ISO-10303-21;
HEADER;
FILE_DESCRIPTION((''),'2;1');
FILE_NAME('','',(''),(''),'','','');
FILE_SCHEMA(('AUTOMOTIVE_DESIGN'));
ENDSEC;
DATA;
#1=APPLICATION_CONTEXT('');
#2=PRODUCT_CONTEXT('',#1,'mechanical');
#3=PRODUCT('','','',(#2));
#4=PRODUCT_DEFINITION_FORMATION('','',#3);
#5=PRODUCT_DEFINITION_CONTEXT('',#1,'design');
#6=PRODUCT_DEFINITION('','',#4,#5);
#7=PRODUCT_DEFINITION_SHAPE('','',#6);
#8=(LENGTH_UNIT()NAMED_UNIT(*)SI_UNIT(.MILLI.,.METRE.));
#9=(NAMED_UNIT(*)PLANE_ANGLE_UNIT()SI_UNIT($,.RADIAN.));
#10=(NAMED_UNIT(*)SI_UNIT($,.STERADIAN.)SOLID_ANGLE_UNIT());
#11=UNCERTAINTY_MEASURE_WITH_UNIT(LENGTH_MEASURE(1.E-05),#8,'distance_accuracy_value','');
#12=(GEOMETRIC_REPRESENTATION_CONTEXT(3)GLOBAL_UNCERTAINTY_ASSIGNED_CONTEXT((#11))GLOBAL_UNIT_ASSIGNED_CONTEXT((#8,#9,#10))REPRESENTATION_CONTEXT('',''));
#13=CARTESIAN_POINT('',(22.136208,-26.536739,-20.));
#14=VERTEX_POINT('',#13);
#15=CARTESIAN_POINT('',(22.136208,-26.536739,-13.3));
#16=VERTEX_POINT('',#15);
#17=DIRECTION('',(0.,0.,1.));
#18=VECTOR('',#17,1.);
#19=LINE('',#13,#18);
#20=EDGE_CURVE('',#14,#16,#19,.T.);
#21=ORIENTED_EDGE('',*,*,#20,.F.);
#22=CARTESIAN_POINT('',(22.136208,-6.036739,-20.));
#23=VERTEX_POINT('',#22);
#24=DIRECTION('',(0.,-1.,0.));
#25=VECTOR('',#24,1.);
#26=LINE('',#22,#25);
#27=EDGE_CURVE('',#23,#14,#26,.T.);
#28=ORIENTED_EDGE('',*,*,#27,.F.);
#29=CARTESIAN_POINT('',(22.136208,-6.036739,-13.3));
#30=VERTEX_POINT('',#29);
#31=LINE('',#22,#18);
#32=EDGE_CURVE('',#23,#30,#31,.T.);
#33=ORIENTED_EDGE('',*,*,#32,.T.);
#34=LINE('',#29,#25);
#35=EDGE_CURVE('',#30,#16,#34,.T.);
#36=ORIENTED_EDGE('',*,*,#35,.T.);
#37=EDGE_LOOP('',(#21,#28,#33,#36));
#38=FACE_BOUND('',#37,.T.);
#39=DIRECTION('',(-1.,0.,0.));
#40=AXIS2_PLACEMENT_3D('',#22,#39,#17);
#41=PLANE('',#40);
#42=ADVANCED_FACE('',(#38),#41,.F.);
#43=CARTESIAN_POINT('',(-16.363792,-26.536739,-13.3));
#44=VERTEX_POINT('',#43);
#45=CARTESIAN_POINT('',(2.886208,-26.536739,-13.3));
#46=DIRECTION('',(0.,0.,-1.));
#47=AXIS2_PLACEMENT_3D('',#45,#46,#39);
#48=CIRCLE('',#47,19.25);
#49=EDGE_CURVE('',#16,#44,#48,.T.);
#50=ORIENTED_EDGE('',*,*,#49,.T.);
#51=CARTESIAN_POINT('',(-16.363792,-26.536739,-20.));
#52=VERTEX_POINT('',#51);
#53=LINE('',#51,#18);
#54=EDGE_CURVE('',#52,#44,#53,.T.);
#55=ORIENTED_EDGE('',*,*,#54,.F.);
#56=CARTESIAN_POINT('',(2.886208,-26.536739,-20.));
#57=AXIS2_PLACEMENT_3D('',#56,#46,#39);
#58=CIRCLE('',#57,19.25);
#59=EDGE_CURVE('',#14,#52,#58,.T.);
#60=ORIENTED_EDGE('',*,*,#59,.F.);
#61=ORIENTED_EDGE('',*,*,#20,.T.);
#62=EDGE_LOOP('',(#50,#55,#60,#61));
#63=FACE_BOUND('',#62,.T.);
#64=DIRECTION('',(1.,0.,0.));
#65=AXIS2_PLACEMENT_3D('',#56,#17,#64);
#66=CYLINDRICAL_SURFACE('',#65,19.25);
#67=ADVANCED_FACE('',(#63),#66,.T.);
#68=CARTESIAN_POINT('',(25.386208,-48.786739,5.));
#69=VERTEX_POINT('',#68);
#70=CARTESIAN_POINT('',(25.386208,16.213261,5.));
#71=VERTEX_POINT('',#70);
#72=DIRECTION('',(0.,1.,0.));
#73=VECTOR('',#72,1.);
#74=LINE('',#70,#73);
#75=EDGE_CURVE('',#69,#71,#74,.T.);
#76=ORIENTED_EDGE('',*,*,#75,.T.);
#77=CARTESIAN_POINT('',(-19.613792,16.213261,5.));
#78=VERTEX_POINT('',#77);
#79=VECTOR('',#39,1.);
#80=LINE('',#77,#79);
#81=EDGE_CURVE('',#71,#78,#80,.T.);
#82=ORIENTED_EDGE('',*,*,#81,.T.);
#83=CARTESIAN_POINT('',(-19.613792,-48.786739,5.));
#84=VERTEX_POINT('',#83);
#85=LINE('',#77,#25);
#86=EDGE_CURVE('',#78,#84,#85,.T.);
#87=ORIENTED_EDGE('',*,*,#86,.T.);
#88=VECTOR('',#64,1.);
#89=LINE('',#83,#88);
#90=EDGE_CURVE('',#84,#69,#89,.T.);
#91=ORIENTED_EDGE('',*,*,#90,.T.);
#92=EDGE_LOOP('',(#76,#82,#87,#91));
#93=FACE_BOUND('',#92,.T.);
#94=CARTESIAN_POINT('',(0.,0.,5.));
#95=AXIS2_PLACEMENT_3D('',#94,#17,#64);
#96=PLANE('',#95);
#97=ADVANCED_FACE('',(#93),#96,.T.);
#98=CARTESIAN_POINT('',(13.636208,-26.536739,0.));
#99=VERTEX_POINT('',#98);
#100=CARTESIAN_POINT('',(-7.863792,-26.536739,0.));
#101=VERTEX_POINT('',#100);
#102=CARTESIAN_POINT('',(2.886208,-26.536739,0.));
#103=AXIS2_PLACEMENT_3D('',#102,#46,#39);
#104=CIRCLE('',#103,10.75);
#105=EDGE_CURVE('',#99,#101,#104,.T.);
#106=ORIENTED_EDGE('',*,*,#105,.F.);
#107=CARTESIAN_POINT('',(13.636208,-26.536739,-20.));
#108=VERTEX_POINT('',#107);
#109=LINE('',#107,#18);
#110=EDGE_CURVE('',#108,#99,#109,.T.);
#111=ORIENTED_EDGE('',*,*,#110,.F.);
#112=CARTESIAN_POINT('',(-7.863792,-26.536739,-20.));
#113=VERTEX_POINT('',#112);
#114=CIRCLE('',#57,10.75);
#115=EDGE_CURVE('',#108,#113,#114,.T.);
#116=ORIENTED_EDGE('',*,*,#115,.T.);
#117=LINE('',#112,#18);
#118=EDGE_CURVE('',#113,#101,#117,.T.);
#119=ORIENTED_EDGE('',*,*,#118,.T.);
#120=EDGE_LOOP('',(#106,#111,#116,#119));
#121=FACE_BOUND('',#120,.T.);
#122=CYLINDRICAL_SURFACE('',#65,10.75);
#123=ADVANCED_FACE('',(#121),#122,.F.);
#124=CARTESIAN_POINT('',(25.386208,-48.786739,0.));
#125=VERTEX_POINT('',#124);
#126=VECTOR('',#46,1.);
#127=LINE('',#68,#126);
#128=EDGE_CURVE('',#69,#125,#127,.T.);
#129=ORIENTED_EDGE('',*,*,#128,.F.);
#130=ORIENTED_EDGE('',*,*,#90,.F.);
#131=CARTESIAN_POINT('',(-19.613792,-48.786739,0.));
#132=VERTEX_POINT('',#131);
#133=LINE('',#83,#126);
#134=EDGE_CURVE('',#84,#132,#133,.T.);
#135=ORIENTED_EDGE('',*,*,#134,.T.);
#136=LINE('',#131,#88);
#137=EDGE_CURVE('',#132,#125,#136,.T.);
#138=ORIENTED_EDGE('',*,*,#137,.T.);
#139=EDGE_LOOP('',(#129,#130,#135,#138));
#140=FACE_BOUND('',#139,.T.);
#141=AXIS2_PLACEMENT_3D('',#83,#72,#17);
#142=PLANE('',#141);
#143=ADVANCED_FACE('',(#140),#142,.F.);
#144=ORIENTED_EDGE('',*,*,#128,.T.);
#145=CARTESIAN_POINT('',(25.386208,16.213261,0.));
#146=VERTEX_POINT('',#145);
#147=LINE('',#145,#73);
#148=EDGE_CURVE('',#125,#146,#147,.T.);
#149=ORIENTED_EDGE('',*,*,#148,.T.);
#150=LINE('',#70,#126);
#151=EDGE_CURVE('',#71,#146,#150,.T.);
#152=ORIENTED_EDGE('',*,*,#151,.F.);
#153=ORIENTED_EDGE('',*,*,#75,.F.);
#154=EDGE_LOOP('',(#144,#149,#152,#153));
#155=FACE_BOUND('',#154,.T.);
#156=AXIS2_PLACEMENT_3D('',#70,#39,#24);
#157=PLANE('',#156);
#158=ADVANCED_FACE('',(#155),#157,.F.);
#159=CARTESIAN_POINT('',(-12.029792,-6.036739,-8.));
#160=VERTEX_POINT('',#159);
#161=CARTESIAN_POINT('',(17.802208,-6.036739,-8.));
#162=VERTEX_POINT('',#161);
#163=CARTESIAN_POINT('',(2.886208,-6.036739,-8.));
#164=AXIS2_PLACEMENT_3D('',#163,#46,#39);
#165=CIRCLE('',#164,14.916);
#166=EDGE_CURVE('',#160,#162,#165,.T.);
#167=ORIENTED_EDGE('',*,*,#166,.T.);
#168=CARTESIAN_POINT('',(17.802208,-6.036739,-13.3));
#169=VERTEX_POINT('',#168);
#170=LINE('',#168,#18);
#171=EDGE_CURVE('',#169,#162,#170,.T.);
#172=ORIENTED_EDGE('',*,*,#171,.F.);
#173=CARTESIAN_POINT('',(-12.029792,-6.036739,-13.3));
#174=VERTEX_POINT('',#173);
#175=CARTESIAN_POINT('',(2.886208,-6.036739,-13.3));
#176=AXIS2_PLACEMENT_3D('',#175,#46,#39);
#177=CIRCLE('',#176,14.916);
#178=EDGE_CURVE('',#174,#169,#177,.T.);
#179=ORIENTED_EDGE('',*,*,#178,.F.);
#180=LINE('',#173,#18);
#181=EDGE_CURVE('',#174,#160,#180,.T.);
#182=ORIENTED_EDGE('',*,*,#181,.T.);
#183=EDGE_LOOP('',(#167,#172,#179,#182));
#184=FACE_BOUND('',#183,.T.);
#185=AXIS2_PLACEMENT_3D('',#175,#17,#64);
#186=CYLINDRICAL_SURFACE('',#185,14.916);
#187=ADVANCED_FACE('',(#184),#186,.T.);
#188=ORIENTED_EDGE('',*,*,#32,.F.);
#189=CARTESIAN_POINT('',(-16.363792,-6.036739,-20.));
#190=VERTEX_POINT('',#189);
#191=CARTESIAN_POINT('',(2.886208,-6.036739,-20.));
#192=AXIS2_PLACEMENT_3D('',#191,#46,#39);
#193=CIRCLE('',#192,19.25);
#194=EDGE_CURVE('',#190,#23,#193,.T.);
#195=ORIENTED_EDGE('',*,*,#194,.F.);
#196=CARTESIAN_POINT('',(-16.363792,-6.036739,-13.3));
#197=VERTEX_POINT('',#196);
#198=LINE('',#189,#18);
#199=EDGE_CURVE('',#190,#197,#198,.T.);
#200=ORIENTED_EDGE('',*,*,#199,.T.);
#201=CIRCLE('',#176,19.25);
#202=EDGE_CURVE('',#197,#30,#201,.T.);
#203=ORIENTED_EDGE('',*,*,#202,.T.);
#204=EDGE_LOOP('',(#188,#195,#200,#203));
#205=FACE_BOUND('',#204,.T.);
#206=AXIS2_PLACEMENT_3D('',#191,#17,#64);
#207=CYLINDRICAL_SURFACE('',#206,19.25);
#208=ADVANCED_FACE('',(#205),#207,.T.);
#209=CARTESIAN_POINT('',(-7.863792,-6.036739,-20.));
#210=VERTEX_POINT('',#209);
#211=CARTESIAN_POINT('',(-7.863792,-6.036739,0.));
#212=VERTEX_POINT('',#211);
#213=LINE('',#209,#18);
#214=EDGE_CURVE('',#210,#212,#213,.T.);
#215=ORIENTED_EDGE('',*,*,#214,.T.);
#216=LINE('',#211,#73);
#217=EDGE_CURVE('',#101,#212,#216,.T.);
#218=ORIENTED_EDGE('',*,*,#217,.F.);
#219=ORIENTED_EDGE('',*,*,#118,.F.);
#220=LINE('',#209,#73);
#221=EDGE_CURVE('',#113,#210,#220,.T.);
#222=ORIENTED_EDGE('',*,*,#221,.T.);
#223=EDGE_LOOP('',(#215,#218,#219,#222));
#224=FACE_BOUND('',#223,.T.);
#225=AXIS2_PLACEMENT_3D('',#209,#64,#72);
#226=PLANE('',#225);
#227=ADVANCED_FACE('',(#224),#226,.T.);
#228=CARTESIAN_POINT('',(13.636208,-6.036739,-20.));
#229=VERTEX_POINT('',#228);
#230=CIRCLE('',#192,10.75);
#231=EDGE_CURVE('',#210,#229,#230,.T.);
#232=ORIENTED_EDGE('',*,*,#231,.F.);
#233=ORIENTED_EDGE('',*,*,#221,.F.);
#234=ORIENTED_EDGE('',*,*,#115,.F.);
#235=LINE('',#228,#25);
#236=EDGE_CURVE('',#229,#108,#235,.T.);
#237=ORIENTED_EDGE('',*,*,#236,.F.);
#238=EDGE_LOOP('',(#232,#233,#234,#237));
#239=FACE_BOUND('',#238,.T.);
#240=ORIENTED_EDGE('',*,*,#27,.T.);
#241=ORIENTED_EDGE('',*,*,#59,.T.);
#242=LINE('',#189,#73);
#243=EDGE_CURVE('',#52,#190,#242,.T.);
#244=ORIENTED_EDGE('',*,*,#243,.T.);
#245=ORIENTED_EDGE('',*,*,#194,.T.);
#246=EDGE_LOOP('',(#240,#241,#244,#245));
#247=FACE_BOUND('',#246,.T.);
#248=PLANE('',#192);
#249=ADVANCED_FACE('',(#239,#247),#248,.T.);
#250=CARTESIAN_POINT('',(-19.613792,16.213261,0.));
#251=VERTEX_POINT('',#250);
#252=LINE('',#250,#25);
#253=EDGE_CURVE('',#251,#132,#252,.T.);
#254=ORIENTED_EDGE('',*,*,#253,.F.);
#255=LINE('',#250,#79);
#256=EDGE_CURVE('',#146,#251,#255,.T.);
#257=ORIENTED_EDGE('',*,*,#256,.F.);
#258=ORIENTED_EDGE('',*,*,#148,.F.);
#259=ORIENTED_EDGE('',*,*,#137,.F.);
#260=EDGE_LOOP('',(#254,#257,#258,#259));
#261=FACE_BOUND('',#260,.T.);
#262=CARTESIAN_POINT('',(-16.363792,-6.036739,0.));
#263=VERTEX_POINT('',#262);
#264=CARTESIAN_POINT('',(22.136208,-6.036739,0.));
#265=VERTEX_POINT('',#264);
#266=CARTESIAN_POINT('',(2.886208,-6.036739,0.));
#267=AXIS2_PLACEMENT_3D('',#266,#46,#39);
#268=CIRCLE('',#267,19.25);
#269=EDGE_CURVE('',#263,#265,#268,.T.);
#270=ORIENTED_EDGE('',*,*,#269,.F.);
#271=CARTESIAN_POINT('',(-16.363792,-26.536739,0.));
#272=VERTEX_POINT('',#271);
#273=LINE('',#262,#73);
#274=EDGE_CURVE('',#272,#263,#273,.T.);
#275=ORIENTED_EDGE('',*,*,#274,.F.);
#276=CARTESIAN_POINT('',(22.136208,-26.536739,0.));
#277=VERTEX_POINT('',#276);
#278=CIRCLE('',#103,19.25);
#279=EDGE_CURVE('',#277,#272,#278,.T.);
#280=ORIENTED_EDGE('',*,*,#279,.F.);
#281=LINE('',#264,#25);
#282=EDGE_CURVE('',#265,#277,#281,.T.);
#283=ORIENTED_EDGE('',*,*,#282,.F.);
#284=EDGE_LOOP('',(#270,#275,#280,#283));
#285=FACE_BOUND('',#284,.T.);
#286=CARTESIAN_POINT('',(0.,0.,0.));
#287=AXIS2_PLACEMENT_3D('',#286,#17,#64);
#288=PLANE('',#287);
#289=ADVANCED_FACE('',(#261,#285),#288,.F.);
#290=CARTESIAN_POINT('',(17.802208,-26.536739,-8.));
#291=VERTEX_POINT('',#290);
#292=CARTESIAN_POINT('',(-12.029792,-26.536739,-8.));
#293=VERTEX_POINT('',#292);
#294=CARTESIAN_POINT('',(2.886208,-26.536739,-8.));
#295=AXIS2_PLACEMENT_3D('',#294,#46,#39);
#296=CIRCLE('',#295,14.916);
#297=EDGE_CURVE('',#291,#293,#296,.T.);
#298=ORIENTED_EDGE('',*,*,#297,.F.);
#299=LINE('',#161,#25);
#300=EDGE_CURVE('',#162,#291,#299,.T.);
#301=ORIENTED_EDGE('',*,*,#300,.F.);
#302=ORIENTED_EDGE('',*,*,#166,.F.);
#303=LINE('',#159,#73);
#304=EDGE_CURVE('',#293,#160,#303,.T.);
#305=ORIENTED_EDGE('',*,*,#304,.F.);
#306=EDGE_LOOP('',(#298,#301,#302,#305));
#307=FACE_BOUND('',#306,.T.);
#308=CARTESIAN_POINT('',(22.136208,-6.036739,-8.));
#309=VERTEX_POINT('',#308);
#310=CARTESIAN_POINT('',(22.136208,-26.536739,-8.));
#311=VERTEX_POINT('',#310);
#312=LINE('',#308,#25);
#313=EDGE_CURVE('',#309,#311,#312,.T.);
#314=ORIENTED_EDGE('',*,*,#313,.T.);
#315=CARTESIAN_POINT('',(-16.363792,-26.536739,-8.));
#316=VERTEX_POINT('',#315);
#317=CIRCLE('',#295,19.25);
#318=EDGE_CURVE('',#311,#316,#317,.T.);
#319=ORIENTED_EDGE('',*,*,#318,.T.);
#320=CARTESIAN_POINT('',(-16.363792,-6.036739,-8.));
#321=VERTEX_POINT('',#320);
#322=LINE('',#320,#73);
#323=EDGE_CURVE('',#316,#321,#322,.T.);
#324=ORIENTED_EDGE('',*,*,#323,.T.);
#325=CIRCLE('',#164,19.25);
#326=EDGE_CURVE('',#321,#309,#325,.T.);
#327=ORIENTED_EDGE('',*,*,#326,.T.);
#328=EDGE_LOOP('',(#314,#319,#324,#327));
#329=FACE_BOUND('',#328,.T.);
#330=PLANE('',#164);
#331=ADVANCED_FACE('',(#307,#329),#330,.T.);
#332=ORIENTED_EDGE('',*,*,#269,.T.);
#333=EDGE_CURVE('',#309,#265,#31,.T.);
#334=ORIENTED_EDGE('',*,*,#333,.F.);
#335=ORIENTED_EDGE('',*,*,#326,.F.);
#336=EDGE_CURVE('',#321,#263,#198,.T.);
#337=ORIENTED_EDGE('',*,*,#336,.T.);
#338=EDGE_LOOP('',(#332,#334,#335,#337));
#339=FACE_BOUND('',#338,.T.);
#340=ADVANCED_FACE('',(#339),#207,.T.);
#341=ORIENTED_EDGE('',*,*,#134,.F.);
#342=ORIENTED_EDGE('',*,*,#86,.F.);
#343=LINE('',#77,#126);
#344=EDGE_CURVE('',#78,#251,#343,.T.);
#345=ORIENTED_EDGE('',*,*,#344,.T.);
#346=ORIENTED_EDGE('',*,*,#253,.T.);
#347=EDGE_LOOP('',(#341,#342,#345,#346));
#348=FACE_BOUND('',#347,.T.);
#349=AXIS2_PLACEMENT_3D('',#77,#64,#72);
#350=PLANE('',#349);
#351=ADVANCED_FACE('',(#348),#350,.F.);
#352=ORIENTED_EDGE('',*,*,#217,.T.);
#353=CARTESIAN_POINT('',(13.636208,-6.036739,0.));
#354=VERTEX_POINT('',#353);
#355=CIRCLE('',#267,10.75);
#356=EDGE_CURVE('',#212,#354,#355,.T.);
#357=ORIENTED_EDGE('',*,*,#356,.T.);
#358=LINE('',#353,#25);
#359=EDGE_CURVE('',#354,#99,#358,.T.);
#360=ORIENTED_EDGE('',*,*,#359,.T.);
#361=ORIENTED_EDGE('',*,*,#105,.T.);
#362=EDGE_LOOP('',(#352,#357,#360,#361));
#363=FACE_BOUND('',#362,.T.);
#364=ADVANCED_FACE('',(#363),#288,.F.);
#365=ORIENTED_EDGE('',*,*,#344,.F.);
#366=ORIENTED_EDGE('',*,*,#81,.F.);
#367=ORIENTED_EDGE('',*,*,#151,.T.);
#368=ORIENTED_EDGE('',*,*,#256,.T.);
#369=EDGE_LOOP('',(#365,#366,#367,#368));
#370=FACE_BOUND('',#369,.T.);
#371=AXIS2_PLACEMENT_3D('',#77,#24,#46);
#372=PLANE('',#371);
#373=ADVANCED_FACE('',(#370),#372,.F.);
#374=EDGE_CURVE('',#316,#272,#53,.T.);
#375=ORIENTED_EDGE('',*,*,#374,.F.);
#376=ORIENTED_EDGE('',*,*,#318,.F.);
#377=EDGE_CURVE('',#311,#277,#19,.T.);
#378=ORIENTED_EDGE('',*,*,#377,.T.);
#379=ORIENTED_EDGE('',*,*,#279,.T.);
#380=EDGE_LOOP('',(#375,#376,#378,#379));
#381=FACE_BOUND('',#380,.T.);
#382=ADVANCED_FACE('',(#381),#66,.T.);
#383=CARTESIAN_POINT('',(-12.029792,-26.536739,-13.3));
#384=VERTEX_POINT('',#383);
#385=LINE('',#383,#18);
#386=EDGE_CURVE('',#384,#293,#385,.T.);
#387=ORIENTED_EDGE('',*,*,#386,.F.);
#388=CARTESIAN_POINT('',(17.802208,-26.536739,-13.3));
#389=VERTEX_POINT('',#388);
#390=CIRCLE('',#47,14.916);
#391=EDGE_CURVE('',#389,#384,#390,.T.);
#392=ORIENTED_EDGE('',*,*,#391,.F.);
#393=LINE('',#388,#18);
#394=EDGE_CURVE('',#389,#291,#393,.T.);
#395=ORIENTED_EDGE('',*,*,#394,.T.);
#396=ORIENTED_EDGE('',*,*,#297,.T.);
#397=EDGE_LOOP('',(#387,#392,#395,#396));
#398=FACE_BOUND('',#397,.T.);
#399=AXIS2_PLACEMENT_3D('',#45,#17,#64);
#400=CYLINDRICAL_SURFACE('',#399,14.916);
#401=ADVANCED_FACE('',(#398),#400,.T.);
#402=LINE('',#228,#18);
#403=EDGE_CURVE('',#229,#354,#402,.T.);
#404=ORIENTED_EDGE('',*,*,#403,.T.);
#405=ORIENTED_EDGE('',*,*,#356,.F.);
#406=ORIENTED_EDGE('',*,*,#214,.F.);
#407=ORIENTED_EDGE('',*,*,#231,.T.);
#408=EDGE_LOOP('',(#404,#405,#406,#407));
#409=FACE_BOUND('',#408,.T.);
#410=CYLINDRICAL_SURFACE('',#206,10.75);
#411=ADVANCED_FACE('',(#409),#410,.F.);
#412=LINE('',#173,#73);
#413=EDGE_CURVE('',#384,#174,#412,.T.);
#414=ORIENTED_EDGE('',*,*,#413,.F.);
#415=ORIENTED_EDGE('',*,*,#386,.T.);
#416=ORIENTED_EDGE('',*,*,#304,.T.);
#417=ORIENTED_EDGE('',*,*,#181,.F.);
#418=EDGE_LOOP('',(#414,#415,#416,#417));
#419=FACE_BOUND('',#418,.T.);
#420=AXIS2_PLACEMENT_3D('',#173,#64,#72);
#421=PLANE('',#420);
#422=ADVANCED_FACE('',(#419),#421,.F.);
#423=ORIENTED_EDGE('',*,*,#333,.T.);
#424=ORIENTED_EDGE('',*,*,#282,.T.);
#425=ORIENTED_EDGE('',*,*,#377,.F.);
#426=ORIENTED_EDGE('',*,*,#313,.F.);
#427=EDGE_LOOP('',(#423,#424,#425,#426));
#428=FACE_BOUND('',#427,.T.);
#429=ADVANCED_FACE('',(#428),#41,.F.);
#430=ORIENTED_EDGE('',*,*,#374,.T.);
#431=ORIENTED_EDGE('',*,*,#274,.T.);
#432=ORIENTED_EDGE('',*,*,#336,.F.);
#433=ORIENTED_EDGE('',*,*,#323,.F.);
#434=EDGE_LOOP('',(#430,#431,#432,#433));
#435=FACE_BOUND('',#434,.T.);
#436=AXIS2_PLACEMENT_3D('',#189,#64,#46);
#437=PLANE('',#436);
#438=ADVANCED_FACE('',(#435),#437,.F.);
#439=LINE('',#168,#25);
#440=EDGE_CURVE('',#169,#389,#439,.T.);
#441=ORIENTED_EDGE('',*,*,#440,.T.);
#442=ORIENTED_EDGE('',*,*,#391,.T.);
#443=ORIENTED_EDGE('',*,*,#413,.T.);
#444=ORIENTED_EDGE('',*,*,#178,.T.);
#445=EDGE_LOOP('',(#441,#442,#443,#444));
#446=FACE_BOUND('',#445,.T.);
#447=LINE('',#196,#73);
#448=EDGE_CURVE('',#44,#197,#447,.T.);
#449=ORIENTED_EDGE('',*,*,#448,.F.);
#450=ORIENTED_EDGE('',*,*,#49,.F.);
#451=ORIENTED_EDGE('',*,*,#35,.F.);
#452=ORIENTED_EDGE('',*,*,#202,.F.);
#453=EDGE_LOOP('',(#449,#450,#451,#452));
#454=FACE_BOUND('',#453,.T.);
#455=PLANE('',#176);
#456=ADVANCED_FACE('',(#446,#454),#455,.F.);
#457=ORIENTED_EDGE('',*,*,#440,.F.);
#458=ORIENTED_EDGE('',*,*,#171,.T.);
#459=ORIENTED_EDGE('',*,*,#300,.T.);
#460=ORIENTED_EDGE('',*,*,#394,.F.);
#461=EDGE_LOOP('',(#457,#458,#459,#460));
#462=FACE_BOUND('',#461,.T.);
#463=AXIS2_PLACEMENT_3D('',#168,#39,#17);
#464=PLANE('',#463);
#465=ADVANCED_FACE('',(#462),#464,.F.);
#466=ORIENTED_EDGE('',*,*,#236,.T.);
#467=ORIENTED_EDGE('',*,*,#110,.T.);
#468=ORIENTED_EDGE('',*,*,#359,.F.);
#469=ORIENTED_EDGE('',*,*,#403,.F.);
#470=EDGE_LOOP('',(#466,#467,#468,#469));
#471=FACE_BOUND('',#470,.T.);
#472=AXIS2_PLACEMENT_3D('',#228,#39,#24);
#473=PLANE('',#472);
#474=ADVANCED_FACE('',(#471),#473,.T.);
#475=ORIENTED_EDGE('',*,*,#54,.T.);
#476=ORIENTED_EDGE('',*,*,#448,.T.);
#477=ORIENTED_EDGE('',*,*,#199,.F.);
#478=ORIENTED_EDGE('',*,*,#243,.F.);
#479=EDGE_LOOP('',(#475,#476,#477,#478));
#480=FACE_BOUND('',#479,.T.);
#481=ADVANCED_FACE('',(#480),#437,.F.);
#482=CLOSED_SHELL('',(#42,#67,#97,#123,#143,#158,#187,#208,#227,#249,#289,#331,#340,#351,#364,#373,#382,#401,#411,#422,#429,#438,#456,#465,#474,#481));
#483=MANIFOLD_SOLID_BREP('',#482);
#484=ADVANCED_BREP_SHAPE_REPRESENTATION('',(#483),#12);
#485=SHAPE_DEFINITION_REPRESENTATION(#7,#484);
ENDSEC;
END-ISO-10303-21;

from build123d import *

# Parameters (mm, degrees)
SKETCH1_W           = 45
SKETCH1_H           = 65
BOSS_EXTRUDE1_DEPTH = 5
BOSS_EXTRUDE2_DEPTH = 20
BOSS_EXTRUDE3_DEPTH = 5.3


with BuildPart() as part:
    # Sketch1 → Boss-Extrude1 (new body)
    with BuildSketch(Plane.XY):
        with Locations((2.886207951, -16.286739239)):
            Rectangle(SKETCH1_W, SKETCH1_H)
    extrude(amount=BOSS_EXTRUDE1_DEPTH)

    # Sketch4 → Boss-Extrude2 (add)
    with BuildSketch(Plane(origin=(0, 0, 0), x_dir=(-1, 0, 0), z_dir=(0, 0, -1))):
        with BuildLine():
            Line((16.363792049, -6.036739239), (16.363792049, -26.536739239))
            ThreePointArc((16.363792049, -26.536739239), (-2.886207951, -45.786739239), (-22.136207951, -26.536739239))
            Line((-22.136207951, -26.536739239), (-22.136207951, -6.036739239))
            ThreePointArc((-22.136207951, -6.036739239), (-2.886207951, 13.213260761), (16.363792049, -6.036739239))
        make_face()
        with BuildLine():
            Line((7.863792049, -6.036739239), (7.863792049, -26.536739239))
            ThreePointArc((7.863792049, -26.536739239), (-2.886207951, -37.286739239), (-13.636207951, -26.536739239))
            Line((-13.636207951, -26.536739239), (-13.636207951, -6.036739239))
            ThreePointArc((-13.636207951, -6.036739239), (-2.886207951, 4.713260761), (7.863792049, -6.036739239))
        make_face(mode=Mode.SUBTRACT)
    extrude(amount=BOSS_EXTRUDE2_DEPTH)


with BuildPart() as body_2:
    # Sketch6 → Boss-Extrude3 (new body)
    with BuildSketch(Plane(origin=(0, 0, 0), x_dir=(-1, 0, 0), z_dir=(0, 0, -1))):
        with BuildLine():
            Line((16.363792049, -6.036739239), (16.363792049, -26.536739239))
            ThreePointArc((16.363792049, -26.536739239), (-2.886207951, -45.786739239), (-22.136207951, -26.536739239))
            Line((-22.136207951, -26.536739239), (-22.136207951, -6.036739239))
            ThreePointArc((-22.136207951, -6.036739239), (-2.886207951, 13.213260761), (16.363792049, -6.036739239))
        make_face()
        with BuildLine():
            Line((12.029792049, -6.036739239), (12.029792049, -26.536739239))
            ThreePointArc((12.029792049, -26.536739239), (-2.886207951, -41.452739239), (-17.802207951, -26.536739239))
            Line((-17.802207951, -26.536739239), (-17.802207951, -6.036739239))
            ThreePointArc((-17.802207951, -6.036739239), (-2.886207951, 8.879260761), (12.029792049, -6.036739239))
        make_face(mode=Mode.SUBTRACT)
    extrude(amount=BOSS_EXTRUDE3_DEPTH)


with BuildPart() as body_2_1:
    # Body-Move/Copy1: read off the stored shape, not the designer's step
    # Body-Move/Copy1: moved
    add(body_2.part.moved(Location((0, 0, -8))))


with BuildPart() as part_1:
    add(part.part)

    # Combine1: cut body 2
    add(body_2_1.part, mode=Mode.SUBTRACT)


solid = part_1.part
